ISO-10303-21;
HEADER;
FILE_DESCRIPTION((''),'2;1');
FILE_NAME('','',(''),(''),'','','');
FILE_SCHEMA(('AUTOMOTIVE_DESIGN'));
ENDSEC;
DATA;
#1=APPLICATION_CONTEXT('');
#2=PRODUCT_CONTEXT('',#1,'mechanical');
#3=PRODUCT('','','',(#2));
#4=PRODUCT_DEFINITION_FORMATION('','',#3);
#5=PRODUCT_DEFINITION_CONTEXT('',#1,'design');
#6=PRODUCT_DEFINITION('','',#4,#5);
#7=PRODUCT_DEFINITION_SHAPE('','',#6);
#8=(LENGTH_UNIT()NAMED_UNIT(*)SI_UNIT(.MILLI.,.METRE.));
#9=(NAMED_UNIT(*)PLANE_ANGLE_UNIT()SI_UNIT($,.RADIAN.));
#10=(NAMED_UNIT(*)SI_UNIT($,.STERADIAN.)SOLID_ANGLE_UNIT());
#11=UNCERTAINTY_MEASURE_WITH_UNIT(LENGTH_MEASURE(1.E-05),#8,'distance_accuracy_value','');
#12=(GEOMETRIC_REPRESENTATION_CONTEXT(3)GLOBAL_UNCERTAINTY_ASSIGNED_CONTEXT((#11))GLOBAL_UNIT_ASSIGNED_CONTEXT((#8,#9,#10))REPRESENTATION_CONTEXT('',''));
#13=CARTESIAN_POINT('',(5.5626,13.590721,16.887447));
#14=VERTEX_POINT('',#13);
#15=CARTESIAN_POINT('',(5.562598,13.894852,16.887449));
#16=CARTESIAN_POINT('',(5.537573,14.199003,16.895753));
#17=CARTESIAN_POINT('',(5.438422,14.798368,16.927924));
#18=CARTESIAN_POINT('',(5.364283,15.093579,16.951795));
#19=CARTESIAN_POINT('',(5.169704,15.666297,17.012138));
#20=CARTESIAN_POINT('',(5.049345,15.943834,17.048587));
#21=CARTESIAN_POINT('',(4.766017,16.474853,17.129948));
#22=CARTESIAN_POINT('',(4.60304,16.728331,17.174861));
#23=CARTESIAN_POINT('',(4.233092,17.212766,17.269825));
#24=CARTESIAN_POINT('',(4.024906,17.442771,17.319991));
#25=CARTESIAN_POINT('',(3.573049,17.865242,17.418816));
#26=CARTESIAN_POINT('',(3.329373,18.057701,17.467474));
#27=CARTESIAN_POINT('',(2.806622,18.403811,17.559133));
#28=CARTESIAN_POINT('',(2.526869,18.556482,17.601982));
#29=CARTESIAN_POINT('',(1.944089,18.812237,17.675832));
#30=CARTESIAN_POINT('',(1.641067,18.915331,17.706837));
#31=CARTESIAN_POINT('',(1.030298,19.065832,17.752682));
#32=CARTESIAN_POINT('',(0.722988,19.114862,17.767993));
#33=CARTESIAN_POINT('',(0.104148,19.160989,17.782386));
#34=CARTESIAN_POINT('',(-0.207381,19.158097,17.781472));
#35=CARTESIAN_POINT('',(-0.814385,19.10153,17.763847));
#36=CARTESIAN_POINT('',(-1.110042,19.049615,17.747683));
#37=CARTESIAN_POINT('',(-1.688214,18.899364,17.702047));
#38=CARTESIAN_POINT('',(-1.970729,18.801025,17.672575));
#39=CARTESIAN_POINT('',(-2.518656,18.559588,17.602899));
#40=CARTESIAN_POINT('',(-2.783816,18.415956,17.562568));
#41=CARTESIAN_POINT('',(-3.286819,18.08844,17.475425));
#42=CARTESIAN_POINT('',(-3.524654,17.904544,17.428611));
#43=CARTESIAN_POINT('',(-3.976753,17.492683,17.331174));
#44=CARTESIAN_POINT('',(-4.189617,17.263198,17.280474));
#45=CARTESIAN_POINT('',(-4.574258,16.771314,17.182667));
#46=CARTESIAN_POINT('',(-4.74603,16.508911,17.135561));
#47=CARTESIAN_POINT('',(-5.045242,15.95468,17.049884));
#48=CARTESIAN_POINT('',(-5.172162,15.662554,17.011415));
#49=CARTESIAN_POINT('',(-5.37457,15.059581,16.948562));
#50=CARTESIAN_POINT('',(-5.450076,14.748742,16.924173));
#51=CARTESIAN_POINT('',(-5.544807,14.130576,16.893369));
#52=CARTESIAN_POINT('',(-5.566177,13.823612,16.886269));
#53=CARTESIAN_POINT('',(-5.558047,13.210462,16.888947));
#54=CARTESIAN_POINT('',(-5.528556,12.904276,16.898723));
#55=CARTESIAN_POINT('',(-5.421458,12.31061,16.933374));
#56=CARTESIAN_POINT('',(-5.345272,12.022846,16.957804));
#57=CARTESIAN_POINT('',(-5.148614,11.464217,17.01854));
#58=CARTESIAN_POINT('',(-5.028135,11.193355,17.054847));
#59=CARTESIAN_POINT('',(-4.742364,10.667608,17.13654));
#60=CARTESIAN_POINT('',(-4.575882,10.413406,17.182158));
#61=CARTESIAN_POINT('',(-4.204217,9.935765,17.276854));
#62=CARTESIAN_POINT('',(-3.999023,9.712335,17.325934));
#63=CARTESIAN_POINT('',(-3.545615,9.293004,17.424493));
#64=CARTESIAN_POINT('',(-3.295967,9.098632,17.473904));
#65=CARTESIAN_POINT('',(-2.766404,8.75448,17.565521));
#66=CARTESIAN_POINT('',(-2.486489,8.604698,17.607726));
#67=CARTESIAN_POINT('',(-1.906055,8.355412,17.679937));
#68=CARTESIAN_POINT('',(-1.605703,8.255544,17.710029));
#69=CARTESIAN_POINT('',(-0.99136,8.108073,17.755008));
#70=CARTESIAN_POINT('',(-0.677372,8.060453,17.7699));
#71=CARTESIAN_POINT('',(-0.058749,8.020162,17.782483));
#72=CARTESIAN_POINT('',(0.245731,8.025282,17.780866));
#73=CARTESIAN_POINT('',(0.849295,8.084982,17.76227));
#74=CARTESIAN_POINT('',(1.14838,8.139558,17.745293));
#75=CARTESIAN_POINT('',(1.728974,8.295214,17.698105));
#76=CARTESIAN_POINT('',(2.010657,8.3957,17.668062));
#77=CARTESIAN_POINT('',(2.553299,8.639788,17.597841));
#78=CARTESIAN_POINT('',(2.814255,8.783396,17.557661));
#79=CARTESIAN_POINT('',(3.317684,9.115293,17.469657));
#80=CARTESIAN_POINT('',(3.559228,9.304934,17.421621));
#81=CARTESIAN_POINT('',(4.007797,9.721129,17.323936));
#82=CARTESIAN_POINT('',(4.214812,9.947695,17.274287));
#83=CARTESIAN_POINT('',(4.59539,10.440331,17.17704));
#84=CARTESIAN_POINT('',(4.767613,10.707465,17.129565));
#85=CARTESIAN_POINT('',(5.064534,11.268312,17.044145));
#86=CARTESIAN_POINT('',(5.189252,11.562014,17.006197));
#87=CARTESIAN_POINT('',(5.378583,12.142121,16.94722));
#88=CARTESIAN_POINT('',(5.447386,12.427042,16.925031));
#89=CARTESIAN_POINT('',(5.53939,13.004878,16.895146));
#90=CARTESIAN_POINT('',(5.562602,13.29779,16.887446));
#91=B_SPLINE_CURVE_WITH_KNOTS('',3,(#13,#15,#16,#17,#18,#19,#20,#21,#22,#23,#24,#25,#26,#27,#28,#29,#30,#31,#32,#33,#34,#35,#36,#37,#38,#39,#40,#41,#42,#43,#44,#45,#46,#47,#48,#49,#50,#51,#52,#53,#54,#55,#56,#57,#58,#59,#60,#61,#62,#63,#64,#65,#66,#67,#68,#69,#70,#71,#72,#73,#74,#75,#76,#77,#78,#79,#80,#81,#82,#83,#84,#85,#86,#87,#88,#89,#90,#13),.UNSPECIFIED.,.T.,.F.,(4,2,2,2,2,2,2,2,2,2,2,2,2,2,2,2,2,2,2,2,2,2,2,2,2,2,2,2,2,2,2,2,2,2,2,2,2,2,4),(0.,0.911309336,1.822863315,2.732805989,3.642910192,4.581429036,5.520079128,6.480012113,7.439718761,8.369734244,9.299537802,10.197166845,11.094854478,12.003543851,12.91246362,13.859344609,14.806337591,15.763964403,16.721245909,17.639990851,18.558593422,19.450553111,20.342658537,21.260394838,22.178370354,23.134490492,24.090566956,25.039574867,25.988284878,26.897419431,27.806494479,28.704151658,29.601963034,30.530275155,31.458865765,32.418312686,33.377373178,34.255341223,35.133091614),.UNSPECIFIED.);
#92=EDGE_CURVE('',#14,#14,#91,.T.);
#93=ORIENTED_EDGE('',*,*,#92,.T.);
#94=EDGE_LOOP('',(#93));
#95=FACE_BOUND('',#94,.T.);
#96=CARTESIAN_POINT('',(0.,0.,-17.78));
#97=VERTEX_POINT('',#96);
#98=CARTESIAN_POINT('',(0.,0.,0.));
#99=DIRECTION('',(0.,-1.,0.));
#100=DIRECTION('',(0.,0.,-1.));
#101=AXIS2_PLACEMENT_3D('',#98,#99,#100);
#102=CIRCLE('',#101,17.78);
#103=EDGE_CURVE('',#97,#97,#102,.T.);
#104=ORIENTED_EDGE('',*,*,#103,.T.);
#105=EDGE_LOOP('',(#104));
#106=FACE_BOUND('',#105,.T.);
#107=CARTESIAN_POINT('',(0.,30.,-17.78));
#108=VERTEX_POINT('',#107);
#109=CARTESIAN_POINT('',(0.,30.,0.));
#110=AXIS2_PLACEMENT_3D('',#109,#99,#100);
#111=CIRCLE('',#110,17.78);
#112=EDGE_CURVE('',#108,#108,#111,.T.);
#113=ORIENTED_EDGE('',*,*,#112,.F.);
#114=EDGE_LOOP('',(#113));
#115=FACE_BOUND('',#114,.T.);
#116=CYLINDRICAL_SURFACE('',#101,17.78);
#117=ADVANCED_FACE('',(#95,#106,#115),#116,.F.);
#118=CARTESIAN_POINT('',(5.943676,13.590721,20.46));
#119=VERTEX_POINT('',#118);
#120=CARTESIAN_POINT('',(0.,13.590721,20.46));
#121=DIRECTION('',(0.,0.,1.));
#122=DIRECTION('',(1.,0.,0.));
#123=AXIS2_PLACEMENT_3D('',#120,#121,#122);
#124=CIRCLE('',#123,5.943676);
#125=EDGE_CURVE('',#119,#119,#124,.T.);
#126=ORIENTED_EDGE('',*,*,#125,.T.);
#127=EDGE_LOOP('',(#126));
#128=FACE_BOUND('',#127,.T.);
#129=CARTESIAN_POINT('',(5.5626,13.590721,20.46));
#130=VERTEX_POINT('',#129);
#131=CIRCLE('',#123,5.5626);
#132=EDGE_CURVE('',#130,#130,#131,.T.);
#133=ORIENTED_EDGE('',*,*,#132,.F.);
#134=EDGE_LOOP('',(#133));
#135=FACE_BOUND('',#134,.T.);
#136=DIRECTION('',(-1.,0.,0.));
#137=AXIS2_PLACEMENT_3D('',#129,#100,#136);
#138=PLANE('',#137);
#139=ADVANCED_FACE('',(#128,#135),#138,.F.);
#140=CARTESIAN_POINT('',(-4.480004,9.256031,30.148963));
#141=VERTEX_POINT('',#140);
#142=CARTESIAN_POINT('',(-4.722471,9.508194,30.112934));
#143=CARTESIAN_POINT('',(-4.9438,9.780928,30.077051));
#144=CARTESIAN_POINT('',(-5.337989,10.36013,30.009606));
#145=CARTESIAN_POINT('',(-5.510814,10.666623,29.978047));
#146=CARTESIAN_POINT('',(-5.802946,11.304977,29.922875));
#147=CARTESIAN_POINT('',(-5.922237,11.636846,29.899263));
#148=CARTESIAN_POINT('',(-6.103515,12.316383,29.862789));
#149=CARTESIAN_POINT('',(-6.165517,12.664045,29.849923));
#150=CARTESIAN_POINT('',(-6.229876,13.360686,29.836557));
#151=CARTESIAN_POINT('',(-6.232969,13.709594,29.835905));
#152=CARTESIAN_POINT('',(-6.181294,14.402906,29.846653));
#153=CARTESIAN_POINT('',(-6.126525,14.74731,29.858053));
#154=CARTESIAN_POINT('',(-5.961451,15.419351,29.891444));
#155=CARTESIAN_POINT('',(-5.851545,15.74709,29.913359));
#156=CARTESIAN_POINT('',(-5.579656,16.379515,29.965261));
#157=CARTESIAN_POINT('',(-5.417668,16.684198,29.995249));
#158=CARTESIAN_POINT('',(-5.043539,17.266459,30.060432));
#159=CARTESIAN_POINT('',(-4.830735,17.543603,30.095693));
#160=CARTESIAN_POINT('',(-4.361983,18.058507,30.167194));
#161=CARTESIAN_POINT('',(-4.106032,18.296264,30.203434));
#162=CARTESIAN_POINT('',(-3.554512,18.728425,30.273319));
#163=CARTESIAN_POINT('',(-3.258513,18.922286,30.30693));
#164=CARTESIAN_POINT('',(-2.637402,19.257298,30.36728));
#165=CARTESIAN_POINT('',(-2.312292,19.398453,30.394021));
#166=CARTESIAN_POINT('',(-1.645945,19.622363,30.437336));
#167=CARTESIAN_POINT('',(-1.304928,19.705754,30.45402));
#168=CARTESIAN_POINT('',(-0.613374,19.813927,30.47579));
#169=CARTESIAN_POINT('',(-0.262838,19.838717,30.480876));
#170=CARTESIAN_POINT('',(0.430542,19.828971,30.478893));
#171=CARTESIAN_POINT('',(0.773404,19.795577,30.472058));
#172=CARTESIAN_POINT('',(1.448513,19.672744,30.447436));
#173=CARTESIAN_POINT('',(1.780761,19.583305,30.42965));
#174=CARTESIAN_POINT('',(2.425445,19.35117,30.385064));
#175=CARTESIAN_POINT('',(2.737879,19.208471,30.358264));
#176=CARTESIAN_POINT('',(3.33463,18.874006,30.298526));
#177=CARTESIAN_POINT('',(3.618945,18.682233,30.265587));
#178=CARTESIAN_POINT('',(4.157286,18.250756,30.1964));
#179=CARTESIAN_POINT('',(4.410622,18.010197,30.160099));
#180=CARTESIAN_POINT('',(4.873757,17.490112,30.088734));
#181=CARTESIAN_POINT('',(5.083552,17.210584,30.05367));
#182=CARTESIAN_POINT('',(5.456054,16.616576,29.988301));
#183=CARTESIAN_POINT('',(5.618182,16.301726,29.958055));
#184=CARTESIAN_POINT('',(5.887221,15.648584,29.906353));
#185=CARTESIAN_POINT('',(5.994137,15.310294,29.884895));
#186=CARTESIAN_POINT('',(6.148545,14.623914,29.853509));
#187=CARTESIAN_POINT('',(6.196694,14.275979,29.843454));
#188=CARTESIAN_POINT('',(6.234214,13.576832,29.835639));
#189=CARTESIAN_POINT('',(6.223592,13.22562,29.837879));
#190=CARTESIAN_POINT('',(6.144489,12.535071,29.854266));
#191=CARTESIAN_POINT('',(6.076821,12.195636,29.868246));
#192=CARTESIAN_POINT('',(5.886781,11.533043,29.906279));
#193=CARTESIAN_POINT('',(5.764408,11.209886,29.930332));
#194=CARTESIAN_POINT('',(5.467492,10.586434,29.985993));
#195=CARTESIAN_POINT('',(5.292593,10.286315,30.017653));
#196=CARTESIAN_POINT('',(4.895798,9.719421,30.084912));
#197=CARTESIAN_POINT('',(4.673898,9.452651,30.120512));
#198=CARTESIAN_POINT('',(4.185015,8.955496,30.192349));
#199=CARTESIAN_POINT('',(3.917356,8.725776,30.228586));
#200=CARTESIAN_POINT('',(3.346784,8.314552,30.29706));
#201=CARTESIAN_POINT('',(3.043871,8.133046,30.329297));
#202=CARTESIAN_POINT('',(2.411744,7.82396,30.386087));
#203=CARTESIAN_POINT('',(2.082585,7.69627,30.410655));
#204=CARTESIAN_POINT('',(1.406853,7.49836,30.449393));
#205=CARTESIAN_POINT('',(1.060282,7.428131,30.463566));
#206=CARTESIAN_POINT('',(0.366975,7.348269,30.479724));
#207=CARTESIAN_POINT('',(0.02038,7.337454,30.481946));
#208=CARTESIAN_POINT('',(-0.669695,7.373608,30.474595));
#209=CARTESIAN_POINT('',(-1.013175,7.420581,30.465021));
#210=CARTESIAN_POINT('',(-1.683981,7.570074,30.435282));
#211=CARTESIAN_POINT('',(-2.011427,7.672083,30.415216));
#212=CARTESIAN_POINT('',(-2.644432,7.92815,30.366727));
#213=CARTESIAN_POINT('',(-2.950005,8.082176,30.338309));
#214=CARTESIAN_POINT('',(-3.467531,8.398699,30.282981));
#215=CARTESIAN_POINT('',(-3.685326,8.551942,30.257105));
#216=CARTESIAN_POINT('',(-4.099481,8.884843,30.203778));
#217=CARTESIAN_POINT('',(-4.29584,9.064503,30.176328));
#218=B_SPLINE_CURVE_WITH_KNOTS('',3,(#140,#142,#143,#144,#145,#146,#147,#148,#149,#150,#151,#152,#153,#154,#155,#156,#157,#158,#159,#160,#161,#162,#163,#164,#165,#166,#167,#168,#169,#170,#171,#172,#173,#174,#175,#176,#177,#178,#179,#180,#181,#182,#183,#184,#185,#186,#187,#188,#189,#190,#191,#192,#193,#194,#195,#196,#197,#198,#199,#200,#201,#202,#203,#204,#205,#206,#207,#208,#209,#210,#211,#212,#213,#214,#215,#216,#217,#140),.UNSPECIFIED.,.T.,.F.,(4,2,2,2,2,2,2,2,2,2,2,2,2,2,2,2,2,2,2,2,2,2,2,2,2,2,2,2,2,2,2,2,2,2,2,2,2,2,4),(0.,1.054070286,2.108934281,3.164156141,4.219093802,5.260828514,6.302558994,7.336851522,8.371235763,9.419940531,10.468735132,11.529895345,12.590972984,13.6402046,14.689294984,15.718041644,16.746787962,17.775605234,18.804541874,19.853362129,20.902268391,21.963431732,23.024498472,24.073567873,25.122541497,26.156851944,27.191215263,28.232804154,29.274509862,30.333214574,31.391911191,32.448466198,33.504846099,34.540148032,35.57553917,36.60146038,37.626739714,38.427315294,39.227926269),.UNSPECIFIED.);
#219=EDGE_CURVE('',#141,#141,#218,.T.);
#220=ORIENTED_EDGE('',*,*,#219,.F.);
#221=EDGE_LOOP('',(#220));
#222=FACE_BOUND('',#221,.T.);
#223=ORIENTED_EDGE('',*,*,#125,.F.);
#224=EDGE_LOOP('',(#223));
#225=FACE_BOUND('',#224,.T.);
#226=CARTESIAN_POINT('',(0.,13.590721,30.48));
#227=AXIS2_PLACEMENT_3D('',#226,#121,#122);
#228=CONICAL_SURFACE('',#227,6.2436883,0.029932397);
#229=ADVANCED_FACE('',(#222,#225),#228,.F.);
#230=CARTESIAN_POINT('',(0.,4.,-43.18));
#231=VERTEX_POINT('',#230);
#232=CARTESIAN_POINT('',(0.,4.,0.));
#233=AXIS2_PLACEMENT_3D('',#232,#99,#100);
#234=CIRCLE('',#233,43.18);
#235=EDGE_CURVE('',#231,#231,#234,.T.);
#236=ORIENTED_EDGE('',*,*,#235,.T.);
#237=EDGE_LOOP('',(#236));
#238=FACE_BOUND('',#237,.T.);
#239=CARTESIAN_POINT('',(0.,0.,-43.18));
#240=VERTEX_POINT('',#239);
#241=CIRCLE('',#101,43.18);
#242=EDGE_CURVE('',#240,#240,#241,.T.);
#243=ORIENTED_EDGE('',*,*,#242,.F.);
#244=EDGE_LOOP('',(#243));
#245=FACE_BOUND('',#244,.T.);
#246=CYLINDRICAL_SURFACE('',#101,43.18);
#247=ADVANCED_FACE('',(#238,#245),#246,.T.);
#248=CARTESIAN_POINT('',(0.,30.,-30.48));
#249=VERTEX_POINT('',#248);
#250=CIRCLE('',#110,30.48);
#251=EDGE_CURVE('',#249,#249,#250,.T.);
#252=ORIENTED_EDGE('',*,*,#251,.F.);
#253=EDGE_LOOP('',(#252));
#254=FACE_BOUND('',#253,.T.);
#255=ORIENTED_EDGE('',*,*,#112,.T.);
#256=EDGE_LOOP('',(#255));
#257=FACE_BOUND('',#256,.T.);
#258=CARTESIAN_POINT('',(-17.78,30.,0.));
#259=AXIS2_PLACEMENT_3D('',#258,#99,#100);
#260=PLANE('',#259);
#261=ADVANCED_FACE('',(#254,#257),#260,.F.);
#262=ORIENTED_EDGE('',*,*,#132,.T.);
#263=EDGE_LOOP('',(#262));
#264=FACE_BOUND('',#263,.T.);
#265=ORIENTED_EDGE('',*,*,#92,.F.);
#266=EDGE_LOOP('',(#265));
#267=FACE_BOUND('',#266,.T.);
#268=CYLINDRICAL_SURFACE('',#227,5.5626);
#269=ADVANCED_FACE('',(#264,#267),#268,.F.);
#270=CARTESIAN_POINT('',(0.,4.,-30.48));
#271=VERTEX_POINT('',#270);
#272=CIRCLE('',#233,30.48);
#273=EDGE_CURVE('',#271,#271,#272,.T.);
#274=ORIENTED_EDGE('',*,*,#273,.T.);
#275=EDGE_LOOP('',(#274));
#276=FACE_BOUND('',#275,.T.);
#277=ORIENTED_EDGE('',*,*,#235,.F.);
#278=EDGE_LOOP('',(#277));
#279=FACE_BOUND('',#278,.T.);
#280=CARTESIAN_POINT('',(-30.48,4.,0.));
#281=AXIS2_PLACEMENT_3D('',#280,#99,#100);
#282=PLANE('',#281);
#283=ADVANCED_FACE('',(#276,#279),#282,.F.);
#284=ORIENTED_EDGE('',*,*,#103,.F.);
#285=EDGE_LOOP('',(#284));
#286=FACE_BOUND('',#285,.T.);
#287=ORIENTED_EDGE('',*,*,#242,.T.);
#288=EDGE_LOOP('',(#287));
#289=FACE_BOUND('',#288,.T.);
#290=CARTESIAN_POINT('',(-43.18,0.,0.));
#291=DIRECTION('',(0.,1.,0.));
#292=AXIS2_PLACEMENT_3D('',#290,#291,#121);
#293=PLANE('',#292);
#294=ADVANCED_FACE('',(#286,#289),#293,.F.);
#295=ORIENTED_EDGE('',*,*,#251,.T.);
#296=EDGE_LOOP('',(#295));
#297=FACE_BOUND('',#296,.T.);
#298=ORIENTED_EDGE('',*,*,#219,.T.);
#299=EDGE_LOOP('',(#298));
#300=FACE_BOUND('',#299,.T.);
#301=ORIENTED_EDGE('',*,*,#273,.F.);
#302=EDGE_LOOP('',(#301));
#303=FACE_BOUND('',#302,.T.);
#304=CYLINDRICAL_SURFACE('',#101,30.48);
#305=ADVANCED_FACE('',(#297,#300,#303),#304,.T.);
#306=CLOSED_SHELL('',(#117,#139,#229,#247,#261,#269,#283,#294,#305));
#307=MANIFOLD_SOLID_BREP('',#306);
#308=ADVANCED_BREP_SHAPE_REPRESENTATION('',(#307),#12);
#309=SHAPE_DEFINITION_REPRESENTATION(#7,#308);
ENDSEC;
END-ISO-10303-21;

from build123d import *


# Read off the part's stored shape, not the designer's step: 1/4 NPT Tapped Hole1
with BuildPart() as part:
    # Sketch1 → Revolve1 (revolve)
    with BuildSketch(Plane.XY, mode=Mode.PRIVATE) as revolve1_sk:
        Polygon((-17.78, 0), (-17.78, 30), (-30.48, 30), (-30.48, 4), (-43.18, 4), (-43.18, 0), align=None)
    revolve(revolve1_sk.sketch.rotate(Axis((0, 0, 0), (0, 1, 0)), 270), axis=Axis((0, 0, 0), (0, 1, 0)))

    # 1/4 NPT Tapped Hole1 outline → 1/4 NPT Tapped Hole1 (revolve, cut)
    with BuildSketch(Plane.XZ.offset(-13.590721134)):
        Polygon((5.5626, 20.46), (5.943676082, 20.46), (6.243695498, 30.480240418), (0, 30.480240418), (0, 16.886929185), (5.5626, 16.886929185), align=None)
    revolve(axis=Axis((0, 13.590721134, 0), (0, 0, 1)), mode=Mode.SUBTRACT)


solid = part.part
